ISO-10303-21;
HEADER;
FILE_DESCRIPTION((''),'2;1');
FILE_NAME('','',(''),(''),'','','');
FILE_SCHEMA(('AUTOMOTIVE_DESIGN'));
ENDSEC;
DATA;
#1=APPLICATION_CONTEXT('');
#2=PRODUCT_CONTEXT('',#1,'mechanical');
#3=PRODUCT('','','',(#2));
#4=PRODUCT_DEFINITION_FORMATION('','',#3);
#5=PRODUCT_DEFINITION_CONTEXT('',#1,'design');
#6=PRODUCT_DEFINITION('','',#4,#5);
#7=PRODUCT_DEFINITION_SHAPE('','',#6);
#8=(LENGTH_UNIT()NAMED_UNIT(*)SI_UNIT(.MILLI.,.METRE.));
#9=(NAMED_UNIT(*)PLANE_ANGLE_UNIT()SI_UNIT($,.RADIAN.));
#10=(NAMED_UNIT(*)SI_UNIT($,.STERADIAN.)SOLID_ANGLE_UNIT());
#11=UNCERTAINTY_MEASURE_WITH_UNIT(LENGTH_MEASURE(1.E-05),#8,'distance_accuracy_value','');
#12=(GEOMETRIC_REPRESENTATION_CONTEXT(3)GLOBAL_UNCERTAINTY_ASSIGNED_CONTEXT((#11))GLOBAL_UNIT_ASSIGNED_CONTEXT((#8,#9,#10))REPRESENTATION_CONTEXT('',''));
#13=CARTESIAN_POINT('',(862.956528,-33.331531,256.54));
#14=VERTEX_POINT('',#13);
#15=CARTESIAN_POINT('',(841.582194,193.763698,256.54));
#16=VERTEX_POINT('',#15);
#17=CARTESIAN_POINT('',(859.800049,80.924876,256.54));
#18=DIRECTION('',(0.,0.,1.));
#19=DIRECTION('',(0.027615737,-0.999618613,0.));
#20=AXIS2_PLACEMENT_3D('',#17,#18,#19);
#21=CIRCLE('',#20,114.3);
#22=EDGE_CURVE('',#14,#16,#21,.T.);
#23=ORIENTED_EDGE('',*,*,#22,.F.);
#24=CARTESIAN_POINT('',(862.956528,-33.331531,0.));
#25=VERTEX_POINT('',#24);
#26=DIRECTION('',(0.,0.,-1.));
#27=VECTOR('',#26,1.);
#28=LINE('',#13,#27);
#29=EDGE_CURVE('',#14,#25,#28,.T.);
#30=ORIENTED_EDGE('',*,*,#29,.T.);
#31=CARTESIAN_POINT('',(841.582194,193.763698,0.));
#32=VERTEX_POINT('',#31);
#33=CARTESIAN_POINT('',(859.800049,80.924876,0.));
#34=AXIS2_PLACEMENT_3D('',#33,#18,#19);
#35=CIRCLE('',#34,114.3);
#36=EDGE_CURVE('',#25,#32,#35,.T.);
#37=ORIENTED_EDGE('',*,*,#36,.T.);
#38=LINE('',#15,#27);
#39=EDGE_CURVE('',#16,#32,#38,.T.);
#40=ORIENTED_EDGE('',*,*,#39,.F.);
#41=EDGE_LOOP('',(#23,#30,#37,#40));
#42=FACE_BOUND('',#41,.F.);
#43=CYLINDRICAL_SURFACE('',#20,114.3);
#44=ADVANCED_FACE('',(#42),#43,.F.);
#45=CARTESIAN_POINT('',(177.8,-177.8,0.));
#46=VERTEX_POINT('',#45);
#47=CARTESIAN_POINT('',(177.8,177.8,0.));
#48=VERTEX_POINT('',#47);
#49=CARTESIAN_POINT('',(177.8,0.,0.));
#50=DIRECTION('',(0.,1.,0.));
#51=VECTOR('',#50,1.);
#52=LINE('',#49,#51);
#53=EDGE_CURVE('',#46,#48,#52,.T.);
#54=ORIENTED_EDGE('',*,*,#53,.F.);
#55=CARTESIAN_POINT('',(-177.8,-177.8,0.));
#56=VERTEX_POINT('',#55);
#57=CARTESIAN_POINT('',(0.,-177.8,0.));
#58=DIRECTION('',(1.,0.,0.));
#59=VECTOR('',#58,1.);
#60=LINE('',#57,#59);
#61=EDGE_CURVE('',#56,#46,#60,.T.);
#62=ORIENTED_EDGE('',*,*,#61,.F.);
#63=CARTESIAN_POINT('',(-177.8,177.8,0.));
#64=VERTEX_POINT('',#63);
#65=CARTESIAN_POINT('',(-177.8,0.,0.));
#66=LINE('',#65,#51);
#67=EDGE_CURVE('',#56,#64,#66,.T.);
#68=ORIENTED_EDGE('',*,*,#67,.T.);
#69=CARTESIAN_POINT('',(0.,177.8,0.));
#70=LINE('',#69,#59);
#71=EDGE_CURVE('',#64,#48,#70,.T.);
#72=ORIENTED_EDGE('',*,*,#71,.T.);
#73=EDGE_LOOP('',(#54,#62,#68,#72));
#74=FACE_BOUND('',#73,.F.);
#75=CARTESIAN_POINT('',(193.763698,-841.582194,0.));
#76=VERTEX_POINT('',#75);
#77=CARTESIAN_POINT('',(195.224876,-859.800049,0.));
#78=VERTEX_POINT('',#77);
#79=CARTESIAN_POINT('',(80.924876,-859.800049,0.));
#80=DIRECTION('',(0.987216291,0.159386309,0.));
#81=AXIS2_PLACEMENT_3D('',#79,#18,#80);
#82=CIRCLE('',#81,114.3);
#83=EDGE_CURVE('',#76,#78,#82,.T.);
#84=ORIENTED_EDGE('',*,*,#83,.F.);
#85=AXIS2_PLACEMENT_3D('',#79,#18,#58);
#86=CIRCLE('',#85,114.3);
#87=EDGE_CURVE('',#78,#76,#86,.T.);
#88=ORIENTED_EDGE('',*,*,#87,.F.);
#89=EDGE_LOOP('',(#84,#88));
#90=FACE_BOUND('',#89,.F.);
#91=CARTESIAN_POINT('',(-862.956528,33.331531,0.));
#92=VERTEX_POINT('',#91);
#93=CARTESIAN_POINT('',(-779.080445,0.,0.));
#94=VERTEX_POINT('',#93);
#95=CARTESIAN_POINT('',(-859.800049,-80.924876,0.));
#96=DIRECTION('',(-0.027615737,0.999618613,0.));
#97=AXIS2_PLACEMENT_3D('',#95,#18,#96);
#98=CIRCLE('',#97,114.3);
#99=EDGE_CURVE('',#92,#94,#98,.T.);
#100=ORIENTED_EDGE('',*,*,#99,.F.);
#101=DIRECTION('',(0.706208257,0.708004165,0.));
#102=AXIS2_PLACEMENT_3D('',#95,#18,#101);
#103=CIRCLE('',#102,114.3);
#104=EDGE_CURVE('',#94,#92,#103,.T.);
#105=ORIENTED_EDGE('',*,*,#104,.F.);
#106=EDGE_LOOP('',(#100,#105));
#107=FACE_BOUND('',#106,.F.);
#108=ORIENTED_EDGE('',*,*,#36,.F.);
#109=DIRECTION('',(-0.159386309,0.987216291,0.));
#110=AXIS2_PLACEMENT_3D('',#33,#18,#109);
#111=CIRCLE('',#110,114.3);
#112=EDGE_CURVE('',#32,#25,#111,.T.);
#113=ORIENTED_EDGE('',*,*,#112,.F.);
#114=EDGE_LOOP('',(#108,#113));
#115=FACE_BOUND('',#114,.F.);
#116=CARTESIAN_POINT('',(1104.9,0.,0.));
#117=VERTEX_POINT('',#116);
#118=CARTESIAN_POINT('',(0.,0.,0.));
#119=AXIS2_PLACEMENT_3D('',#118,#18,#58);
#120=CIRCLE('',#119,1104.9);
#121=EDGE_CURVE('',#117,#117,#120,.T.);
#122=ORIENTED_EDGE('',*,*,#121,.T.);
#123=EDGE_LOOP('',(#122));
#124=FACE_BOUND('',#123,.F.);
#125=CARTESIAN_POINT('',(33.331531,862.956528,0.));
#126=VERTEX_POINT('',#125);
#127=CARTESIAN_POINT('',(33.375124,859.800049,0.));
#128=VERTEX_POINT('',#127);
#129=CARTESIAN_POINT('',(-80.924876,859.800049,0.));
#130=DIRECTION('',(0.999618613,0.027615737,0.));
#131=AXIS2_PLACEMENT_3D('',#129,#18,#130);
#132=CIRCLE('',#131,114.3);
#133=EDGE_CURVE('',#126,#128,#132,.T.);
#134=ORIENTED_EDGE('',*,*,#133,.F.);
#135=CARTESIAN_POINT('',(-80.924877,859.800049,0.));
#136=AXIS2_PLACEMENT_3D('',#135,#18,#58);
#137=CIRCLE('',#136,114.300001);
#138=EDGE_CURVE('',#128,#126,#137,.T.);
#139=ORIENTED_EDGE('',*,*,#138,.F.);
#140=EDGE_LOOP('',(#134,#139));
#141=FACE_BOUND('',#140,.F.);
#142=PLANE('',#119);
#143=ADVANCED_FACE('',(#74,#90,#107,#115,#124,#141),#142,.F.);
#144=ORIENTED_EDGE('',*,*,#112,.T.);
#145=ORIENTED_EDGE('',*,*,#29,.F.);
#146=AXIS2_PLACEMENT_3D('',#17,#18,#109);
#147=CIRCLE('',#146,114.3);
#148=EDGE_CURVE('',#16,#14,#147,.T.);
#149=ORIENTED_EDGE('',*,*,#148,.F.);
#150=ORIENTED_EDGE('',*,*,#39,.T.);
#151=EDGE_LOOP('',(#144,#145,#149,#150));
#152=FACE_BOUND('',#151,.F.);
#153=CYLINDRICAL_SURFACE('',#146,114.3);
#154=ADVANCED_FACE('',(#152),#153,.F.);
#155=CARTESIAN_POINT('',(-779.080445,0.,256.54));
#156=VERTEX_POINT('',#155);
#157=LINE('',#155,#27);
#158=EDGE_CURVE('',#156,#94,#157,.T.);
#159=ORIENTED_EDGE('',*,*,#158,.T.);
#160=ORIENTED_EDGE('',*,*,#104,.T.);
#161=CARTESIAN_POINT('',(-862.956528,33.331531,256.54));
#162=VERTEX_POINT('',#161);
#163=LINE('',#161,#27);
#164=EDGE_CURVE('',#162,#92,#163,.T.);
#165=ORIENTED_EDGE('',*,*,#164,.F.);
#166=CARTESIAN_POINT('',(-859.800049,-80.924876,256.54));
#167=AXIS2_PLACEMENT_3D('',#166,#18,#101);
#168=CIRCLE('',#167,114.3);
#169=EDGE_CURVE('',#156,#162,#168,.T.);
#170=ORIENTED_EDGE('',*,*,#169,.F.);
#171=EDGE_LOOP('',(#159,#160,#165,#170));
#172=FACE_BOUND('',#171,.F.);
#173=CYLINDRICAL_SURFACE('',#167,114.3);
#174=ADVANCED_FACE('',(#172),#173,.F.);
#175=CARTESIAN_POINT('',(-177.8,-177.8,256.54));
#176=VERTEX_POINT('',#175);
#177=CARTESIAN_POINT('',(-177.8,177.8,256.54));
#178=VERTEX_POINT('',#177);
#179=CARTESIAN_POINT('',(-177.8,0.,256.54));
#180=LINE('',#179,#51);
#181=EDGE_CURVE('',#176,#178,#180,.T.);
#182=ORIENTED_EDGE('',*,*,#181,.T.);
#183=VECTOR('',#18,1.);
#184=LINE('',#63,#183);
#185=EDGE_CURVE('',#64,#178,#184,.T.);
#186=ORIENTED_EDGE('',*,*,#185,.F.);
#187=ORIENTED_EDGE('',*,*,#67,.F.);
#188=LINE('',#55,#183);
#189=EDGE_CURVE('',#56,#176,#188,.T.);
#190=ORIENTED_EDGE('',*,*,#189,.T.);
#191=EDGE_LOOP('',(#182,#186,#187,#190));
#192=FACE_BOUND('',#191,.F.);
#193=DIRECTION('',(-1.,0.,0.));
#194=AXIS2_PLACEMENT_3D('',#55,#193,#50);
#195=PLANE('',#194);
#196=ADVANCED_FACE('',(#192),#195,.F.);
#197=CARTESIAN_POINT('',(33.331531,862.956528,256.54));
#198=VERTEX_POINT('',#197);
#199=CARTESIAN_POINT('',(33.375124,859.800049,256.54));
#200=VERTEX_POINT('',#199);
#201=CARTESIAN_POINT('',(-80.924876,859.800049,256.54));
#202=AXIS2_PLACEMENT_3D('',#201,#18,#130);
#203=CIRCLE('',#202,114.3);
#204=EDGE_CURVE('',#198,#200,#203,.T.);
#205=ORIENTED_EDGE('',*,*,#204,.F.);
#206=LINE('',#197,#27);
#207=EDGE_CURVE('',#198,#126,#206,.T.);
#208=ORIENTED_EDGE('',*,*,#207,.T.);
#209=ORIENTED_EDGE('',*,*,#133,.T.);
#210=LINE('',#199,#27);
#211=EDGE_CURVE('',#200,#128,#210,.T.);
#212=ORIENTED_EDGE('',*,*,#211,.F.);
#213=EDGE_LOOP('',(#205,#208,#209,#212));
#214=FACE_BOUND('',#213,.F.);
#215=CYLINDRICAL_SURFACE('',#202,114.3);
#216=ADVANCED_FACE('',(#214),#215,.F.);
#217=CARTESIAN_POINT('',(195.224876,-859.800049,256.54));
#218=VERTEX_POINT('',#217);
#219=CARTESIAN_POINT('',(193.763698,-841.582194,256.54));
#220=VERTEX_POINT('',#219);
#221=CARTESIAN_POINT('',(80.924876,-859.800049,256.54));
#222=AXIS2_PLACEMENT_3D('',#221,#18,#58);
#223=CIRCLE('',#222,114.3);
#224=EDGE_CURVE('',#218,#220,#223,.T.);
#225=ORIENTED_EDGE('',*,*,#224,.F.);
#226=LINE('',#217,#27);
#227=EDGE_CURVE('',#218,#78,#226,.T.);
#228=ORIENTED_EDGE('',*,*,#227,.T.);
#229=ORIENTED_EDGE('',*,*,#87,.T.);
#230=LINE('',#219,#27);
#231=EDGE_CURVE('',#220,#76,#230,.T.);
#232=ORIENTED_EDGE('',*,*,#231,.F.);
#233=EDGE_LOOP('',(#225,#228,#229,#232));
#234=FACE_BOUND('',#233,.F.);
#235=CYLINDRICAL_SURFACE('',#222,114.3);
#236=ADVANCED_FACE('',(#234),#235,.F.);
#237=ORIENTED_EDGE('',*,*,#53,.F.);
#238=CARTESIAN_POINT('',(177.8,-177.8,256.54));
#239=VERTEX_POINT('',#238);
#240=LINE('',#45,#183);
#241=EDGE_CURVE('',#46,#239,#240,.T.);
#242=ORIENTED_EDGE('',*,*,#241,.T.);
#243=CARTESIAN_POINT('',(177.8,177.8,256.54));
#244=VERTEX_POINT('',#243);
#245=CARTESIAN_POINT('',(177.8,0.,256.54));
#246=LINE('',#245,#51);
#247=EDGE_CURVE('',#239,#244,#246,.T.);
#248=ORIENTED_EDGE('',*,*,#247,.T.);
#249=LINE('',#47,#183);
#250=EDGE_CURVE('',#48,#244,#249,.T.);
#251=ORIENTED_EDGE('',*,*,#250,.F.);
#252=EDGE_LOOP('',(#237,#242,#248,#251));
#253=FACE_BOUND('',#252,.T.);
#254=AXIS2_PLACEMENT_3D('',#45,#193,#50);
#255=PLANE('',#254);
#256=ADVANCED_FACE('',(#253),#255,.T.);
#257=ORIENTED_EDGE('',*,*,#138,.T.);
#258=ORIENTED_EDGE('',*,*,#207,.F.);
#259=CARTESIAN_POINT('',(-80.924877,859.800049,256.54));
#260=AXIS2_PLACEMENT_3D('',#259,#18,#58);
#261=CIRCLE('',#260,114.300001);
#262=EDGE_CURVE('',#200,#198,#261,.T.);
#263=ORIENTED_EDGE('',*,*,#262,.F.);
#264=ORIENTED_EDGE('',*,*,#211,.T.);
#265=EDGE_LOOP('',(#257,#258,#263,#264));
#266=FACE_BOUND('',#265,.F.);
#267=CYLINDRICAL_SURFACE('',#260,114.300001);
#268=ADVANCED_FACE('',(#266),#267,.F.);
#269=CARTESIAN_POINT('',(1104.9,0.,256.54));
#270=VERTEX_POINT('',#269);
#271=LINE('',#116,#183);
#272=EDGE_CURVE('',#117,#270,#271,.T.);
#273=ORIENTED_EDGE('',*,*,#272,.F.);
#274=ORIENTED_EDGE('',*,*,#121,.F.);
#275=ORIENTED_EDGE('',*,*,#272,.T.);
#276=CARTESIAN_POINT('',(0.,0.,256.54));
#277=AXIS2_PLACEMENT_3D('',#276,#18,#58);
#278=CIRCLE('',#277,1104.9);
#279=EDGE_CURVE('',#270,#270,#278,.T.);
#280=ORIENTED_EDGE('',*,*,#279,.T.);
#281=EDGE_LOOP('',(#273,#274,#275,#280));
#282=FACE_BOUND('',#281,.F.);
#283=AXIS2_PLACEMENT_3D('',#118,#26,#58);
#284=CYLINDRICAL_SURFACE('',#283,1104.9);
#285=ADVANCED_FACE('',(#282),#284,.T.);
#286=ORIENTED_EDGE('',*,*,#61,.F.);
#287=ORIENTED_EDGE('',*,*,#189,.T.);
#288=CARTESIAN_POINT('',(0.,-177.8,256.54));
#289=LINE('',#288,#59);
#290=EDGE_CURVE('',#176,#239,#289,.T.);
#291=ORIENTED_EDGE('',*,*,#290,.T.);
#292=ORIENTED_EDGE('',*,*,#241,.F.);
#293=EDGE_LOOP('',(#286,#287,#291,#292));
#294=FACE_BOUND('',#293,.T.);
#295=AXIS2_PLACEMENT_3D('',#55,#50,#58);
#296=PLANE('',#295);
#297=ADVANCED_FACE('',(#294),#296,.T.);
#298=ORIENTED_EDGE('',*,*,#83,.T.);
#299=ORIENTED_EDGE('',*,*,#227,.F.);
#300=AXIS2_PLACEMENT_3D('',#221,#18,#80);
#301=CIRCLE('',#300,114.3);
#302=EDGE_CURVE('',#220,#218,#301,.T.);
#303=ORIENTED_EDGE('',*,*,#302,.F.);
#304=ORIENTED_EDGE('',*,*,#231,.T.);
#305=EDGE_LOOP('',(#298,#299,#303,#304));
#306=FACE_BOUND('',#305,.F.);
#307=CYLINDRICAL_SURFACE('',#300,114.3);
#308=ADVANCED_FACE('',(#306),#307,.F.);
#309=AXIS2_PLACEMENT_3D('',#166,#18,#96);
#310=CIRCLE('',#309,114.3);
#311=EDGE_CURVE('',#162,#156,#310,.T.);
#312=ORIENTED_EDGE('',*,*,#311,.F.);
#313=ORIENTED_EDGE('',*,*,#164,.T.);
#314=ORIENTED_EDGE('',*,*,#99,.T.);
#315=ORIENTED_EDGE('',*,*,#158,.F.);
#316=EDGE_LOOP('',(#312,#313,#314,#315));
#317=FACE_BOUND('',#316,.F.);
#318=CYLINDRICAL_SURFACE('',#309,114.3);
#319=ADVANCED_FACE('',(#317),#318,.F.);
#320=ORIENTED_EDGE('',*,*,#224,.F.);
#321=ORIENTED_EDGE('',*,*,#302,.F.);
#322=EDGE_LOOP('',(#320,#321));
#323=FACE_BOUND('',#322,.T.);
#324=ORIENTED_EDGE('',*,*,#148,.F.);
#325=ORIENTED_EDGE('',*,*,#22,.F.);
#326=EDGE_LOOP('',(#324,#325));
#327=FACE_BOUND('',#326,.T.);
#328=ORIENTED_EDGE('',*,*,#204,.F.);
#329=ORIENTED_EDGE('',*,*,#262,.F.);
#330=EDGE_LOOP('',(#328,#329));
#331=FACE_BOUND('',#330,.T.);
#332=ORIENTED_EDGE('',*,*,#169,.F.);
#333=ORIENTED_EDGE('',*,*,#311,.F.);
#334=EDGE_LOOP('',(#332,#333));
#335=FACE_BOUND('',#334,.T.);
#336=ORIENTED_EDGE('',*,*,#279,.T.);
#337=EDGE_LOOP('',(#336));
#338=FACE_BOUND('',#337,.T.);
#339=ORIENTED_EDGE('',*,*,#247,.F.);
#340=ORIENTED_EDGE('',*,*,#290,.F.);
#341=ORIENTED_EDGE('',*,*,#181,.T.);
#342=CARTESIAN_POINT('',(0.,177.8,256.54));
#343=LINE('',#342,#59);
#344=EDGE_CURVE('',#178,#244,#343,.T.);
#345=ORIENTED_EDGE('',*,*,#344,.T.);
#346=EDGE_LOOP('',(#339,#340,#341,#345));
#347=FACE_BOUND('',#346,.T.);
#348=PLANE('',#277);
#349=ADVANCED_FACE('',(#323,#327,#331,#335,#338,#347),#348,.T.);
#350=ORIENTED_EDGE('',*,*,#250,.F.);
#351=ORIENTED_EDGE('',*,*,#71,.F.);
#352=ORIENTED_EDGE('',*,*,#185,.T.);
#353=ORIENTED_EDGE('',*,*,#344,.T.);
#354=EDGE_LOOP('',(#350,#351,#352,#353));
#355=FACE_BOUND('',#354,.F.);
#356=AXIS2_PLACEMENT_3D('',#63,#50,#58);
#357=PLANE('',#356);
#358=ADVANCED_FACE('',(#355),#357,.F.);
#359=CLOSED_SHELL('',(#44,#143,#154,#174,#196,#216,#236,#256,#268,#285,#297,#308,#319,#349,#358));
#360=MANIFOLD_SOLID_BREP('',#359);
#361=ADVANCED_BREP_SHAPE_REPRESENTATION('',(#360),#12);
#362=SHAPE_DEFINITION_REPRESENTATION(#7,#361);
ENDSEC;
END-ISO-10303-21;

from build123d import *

# Parameters (mm, degrees)
F0_R     = 1104.9
F0_W     = 355.6
F0_H     = 355.6
F1_DEPTH = 256.54
F3_DEPTH = 711.2


# Not quite as in the source:
# - a feature of the source that left no trace in its solid (it failed there, or was rolled back) is left out


with BuildPart() as f1:
    # F0 (on Top) → F1 (new body)
    with BuildSketch(Plane.XY):
        Circle(F0_R)
        Rectangle(F0_W, F0_H, mode=Mode.SUBTRACT)
    extrude(amount=F1_DEPTH)

    # F2 (on face) → F3 (cut)
    with BuildSketch(Plane.XY.offset(256.54)):
        with BuildLine():
            ThreePointArc((33.3315313944, 862.9565278824), (-80.9248760483, 859.8000491024), (-193.7636980758, 841.5821940298))
            ThreePointArc((-193.7636980758, 841.5821940298), (-71.7866967368, 745.8659291959), (33.3751239517, 859.8000491024))
            ThreePointArc((33.3751239517, 859.8000491024), (33.3642252927, 861.378438994), (33.3315313944, 862.9565278824))
        make_face()
        with BuildLine():
            ThreePointArc((33.3315313944, 862.9565278824), (-91.6355214077, 973.5971144248), (-193.7636980758, 841.5821940298))
            ThreePointArc((-193.7636980758, 841.5821940298), (-80.9248760483, 859.8000491024), (33.3315313944, 862.9565278824))
        make_face()
        with BuildLine():
            ThreePointArc((-841.5821940298, -193.7636980758), (-858.07789354, -97.5053261004), (-863.6, 0))
            Line((-863.6, 0), (-940.5196528958, 0))
            ThreePointArc((-940.5196528958, 0), (-961.597445048, -132.9035272304), (-841.5821940298, -193.7636980758))
        make_face()
        with BuildLine():
            ThreePointArc((-745.5000491024, -80.9248760483), (-754.2284129647, -37.1171182513), (-779.0804453091, 0))
            Line((-779.0804453091, 0), (-863.6, 0))
            ThreePointArc((-863.6, 0), (-858.07789354, -97.5053261004), (-841.5821940298, -193.7636980758))
            ThreePointArc((-841.5821940298, -193.7636980758), (-772.7747917492, -155.0267962839), (-745.5000491024, -80.9248760483))
        make_face()
        with BuildLine():
            ThreePointArc((974.1000491024, 80.9248760483), (933.901969338, 167.9501334016), (841.5821940298, 193.7636980758))
            ThreePointArc((841.5821940298, 193.7636980758), (858.07789354, 97.5053261004), (863.6, 0))
            ThreePointArc((863.6, 0), (863.4391169849, -16.6688709985), (862.9565278824, -33.3315313944))
            ThreePointArc((862.9565278824, -33.3315313944), (941.7307378721, 1.2263676701), (974.1000491024, 80.9248760483))
        make_face()
        with BuildLine():
            ThreePointArc((863.6, 0), (858.07789354, 97.5053261004), (841.5821940298, 193.7636980758))
            ThreePointArc((841.5821940298, 193.7636980758), (746.0029837801, 70.214230689), (862.9565278824, -33.3315313944))
            ThreePointArc((862.9565278824, -33.3315313944), (863.4391169849, -16.6688709985), (863.6, 0))
        make_face()
        with BuildLine():
            ThreePointArc((193.7636980758, -841.5821940298), (80.9248760483, -859.8000491024), (-33.3315313944, -862.9565278824))
            ThreePointArc((-33.3315313944, -862.9565278824), (82.5032659399, -974.0891504435), (195.2248760483, -859.8000491024))
            ThreePointArc((195.2248760483, -859.8000491024), (194.8589959549, -850.661869791), (193.7636980758, -841.5821940298))
        make_face()
        with BuildLine():
            ThreePointArc((193.7636980758, -841.5821940298), (70.214230689, -746.0029837801), (-33.3315313944, -862.9565278824))
            ThreePointArc((-33.3315313944, -862.9565278824), (80.9248760483, -859.8000491024), (193.7636980758, -841.5821940298))
        make_face()
        with BuildLine():
            Line((-940.5196528958, 0), (-863.6, 0))
            ThreePointArc((-863.6, 0), (-863.4391169849, 16.6688709985), (-862.9565278824, 33.3315313944))
            ThreePointArc((-862.9565278824, 33.3315313944), (-904.9281673131, 24.0891370488), (-940.5196528958, 0))
        make_face()
        with BuildLine():
            Line((-863.6, 0), (-779.0804453091, 0))
            ThreePointArc((-779.0804453091, 0), (-817.5891815831, 25.295332308), (-862.9565278824, 33.3315313944))
            ThreePointArc((-862.9565278824, 33.3315313944), (-863.4391169849, 16.6688709985), (-863.6, 0))
        make_face()
    extrude(amount=-F3_DEPTH, mode=Mode.SUBTRACT)


solid = f1.part
